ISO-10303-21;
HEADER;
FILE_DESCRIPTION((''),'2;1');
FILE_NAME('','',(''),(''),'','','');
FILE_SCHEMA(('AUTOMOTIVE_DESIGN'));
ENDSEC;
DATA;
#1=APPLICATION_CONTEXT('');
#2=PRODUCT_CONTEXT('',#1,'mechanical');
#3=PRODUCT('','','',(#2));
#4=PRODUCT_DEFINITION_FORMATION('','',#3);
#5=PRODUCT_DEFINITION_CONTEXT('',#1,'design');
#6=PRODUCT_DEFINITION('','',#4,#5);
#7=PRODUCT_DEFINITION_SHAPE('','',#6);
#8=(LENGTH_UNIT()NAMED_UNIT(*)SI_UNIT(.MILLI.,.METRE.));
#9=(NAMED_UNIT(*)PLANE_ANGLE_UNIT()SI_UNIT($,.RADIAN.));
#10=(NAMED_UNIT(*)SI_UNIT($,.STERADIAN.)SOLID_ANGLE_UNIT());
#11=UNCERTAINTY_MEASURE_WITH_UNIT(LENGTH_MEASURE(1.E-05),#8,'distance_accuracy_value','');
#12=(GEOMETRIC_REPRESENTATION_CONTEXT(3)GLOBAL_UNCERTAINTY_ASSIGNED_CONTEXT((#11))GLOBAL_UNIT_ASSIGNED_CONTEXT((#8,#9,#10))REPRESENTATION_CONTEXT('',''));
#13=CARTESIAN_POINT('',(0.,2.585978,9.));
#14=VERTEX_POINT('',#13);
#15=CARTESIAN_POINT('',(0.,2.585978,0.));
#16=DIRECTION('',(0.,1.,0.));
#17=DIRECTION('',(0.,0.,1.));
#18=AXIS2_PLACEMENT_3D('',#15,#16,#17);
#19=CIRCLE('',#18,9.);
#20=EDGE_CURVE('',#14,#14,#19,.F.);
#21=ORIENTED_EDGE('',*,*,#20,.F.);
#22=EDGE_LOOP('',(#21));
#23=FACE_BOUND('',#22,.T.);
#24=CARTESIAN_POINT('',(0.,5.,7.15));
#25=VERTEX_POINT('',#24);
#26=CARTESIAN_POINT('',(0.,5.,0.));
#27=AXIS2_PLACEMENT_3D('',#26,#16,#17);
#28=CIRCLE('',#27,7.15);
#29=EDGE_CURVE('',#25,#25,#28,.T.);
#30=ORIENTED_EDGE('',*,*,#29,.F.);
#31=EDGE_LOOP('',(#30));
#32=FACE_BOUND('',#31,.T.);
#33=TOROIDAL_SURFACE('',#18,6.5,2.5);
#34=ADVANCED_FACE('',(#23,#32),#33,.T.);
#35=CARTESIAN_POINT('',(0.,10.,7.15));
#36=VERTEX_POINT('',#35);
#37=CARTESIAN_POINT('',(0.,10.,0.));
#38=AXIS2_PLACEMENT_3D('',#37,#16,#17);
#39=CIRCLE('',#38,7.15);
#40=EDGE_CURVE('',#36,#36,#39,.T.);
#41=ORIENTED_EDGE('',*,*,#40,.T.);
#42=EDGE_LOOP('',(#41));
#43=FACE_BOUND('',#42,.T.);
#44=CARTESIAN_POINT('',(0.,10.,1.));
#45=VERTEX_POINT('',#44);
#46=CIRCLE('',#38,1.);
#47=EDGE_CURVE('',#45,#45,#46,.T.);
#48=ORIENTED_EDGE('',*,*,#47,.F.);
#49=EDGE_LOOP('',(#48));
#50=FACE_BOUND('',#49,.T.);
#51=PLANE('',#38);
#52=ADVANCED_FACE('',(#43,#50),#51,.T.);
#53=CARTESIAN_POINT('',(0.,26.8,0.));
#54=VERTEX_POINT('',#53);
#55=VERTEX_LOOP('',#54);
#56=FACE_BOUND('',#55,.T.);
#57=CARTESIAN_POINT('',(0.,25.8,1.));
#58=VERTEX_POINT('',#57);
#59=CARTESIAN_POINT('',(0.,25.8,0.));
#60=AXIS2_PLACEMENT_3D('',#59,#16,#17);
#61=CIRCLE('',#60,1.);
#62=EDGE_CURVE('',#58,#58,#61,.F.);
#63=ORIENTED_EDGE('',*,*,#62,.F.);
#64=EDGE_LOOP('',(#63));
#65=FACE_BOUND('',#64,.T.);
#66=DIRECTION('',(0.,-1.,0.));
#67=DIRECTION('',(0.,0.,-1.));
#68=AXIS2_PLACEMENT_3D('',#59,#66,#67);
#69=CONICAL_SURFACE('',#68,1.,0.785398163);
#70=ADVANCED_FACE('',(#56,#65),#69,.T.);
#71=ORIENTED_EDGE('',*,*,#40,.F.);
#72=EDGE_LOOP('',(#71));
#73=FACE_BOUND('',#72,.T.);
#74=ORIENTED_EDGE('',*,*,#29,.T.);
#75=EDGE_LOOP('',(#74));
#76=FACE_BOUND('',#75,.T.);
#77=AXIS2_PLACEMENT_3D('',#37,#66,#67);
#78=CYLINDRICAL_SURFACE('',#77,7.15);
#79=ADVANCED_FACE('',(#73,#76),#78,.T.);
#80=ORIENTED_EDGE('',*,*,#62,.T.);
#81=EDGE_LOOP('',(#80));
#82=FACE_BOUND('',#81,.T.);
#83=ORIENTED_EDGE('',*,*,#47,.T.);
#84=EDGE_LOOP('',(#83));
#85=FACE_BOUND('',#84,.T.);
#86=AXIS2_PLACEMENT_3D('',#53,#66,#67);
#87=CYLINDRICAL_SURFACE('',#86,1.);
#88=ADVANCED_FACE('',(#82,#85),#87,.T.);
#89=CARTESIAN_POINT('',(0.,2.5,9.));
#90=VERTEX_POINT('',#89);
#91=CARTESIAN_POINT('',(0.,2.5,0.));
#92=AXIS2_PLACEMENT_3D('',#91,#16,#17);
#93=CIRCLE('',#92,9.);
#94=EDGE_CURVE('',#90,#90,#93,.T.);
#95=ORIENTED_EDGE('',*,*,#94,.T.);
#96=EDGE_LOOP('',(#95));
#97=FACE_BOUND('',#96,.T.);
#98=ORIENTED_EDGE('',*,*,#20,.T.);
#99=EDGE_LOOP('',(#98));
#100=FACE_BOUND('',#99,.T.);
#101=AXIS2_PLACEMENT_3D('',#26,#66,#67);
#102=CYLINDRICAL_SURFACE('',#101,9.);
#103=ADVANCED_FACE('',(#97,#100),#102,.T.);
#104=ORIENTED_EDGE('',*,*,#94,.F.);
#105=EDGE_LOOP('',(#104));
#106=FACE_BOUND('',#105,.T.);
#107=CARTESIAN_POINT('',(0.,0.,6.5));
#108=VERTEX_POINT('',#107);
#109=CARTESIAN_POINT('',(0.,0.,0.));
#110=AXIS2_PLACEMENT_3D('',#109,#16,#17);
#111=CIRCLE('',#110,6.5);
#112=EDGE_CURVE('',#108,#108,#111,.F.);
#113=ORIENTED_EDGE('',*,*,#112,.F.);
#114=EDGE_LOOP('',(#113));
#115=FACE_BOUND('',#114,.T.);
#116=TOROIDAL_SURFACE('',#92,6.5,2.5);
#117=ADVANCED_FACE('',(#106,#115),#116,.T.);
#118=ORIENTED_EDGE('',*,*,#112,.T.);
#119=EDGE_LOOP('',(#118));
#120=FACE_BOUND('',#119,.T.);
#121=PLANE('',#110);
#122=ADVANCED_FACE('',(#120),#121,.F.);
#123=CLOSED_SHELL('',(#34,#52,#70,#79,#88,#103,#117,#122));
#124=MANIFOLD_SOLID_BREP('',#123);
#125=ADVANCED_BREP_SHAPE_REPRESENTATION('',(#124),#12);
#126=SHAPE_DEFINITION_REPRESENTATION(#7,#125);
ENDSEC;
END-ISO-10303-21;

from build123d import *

# Parameters (mm, degrees)
SKETCH1_R           = 9
BOSS_EXTRUDE1_DEPTH = 5
SKETCH2_R           = 7.15
BOSS_EXTRUDE2_DEPTH = 5
SKETCH3_R           = 1
BOSS_EXTRUDE3_DEPTH = 16.8
FILLET1_R           = 2.5
CHAMFER1_SIZE       = 1


with BuildPart() as part:
    # Sketch1 → Boss-Extrude1 (new body)
    with BuildSketch(Plane(origin=(0, 0, 0), x_dir=(1, 0, 0), z_dir=(0, 1, 0))):
        with Locations(Location((0, 0, 0), (0, 0, 270))):
            Circle(SKETCH1_R)
    extrude(amount=BOSS_EXTRUDE1_DEPTH)

    # Sketch2 → Boss-Extrude2 (add)
    with BuildSketch(Plane(origin=(0, 5, 0), x_dir=(1, 0, 0), z_dir=(0, 1, 0))):
        with Locations(Location((0, 0, 0), (0, 0, 270))):
            Circle(SKETCH2_R)
    extrude(amount=BOSS_EXTRUDE2_DEPTH)

    # Sketch3 → Boss-Extrude3 (add)
    with BuildSketch(Plane(origin=(0, 10, 0), x_dir=(1, 0, 0), z_dir=(0, 1, 0))):
        with Locations(Location((0, 0, 0), (0, 0, 270))):
            Circle(SKETCH3_R)
    extrude(amount=BOSS_EXTRUDE3_DEPTH)

    # Fillet1
    # the kernel refuses this fillet: 2.5 mm, written as the material it takes off along each edge
    with BuildSketch(Plane(origin=(0, 0, 0), x_dir=(0, 0, 1), z_dir=(-1, 0, 0))) as fillet1_piece_1:
        with BuildLine():
            CenterArc((9 - FILLET1_R, FILLET1_R), FILLET1_R, 270, 90)
            Line((9 - FILLET1_R, 0), (9 - FILLET1_R, -FILLET1_R * 0.02))
            Line((9 - FILLET1_R, -FILLET1_R * 0.02), (9 + FILLET1_R * 0.02, -FILLET1_R * 0.02))
            Line((9 + FILLET1_R * 0.02, -FILLET1_R * 0.02), (9 + FILLET1_R * 0.02, FILLET1_R))
            Line((9 + FILLET1_R * 0.02, FILLET1_R), (9, FILLET1_R))
        make_face()
    revolve(axis=Axis((0, 0, 0), (0, 1, 0)), mode=Mode.SUBTRACT)
    with BuildSketch(Plane(origin=(0, 5, 0), x_dir=(0, 0, 1), z_dir=(-1, 0, 0))) as fillet1_piece_2:
        with BuildLine():
            CenterArc((6.5, -2.414021541), FILLET1_R, 0, 74.929937855)
            Line((7.15, 0), (7.163, 0.048280431))
            ThreePointArc((7.163, 0.048280431), (8.075, 0.05), (9, 0.05))
            Line((9, 0.05), (9.05, 0))
            Line((9.05, 0), (9.05, -2.414021541))
            Line((9.05, -2.414021541), (9, -2.414021541))
        make_face()
    revolve(axis=Axis((0, 5, 0), (0, 1, 0)), mode=Mode.SUBTRACT)

    # Chamfer1
    chamfer1_edges = [part.edges().sort_by_distance(p)[0] for p in [
        (0, 26.8, -1),
    ]]
    chamfer(chamfer1_edges, length=CHAMFER1_SIZE)


solid = part.part
